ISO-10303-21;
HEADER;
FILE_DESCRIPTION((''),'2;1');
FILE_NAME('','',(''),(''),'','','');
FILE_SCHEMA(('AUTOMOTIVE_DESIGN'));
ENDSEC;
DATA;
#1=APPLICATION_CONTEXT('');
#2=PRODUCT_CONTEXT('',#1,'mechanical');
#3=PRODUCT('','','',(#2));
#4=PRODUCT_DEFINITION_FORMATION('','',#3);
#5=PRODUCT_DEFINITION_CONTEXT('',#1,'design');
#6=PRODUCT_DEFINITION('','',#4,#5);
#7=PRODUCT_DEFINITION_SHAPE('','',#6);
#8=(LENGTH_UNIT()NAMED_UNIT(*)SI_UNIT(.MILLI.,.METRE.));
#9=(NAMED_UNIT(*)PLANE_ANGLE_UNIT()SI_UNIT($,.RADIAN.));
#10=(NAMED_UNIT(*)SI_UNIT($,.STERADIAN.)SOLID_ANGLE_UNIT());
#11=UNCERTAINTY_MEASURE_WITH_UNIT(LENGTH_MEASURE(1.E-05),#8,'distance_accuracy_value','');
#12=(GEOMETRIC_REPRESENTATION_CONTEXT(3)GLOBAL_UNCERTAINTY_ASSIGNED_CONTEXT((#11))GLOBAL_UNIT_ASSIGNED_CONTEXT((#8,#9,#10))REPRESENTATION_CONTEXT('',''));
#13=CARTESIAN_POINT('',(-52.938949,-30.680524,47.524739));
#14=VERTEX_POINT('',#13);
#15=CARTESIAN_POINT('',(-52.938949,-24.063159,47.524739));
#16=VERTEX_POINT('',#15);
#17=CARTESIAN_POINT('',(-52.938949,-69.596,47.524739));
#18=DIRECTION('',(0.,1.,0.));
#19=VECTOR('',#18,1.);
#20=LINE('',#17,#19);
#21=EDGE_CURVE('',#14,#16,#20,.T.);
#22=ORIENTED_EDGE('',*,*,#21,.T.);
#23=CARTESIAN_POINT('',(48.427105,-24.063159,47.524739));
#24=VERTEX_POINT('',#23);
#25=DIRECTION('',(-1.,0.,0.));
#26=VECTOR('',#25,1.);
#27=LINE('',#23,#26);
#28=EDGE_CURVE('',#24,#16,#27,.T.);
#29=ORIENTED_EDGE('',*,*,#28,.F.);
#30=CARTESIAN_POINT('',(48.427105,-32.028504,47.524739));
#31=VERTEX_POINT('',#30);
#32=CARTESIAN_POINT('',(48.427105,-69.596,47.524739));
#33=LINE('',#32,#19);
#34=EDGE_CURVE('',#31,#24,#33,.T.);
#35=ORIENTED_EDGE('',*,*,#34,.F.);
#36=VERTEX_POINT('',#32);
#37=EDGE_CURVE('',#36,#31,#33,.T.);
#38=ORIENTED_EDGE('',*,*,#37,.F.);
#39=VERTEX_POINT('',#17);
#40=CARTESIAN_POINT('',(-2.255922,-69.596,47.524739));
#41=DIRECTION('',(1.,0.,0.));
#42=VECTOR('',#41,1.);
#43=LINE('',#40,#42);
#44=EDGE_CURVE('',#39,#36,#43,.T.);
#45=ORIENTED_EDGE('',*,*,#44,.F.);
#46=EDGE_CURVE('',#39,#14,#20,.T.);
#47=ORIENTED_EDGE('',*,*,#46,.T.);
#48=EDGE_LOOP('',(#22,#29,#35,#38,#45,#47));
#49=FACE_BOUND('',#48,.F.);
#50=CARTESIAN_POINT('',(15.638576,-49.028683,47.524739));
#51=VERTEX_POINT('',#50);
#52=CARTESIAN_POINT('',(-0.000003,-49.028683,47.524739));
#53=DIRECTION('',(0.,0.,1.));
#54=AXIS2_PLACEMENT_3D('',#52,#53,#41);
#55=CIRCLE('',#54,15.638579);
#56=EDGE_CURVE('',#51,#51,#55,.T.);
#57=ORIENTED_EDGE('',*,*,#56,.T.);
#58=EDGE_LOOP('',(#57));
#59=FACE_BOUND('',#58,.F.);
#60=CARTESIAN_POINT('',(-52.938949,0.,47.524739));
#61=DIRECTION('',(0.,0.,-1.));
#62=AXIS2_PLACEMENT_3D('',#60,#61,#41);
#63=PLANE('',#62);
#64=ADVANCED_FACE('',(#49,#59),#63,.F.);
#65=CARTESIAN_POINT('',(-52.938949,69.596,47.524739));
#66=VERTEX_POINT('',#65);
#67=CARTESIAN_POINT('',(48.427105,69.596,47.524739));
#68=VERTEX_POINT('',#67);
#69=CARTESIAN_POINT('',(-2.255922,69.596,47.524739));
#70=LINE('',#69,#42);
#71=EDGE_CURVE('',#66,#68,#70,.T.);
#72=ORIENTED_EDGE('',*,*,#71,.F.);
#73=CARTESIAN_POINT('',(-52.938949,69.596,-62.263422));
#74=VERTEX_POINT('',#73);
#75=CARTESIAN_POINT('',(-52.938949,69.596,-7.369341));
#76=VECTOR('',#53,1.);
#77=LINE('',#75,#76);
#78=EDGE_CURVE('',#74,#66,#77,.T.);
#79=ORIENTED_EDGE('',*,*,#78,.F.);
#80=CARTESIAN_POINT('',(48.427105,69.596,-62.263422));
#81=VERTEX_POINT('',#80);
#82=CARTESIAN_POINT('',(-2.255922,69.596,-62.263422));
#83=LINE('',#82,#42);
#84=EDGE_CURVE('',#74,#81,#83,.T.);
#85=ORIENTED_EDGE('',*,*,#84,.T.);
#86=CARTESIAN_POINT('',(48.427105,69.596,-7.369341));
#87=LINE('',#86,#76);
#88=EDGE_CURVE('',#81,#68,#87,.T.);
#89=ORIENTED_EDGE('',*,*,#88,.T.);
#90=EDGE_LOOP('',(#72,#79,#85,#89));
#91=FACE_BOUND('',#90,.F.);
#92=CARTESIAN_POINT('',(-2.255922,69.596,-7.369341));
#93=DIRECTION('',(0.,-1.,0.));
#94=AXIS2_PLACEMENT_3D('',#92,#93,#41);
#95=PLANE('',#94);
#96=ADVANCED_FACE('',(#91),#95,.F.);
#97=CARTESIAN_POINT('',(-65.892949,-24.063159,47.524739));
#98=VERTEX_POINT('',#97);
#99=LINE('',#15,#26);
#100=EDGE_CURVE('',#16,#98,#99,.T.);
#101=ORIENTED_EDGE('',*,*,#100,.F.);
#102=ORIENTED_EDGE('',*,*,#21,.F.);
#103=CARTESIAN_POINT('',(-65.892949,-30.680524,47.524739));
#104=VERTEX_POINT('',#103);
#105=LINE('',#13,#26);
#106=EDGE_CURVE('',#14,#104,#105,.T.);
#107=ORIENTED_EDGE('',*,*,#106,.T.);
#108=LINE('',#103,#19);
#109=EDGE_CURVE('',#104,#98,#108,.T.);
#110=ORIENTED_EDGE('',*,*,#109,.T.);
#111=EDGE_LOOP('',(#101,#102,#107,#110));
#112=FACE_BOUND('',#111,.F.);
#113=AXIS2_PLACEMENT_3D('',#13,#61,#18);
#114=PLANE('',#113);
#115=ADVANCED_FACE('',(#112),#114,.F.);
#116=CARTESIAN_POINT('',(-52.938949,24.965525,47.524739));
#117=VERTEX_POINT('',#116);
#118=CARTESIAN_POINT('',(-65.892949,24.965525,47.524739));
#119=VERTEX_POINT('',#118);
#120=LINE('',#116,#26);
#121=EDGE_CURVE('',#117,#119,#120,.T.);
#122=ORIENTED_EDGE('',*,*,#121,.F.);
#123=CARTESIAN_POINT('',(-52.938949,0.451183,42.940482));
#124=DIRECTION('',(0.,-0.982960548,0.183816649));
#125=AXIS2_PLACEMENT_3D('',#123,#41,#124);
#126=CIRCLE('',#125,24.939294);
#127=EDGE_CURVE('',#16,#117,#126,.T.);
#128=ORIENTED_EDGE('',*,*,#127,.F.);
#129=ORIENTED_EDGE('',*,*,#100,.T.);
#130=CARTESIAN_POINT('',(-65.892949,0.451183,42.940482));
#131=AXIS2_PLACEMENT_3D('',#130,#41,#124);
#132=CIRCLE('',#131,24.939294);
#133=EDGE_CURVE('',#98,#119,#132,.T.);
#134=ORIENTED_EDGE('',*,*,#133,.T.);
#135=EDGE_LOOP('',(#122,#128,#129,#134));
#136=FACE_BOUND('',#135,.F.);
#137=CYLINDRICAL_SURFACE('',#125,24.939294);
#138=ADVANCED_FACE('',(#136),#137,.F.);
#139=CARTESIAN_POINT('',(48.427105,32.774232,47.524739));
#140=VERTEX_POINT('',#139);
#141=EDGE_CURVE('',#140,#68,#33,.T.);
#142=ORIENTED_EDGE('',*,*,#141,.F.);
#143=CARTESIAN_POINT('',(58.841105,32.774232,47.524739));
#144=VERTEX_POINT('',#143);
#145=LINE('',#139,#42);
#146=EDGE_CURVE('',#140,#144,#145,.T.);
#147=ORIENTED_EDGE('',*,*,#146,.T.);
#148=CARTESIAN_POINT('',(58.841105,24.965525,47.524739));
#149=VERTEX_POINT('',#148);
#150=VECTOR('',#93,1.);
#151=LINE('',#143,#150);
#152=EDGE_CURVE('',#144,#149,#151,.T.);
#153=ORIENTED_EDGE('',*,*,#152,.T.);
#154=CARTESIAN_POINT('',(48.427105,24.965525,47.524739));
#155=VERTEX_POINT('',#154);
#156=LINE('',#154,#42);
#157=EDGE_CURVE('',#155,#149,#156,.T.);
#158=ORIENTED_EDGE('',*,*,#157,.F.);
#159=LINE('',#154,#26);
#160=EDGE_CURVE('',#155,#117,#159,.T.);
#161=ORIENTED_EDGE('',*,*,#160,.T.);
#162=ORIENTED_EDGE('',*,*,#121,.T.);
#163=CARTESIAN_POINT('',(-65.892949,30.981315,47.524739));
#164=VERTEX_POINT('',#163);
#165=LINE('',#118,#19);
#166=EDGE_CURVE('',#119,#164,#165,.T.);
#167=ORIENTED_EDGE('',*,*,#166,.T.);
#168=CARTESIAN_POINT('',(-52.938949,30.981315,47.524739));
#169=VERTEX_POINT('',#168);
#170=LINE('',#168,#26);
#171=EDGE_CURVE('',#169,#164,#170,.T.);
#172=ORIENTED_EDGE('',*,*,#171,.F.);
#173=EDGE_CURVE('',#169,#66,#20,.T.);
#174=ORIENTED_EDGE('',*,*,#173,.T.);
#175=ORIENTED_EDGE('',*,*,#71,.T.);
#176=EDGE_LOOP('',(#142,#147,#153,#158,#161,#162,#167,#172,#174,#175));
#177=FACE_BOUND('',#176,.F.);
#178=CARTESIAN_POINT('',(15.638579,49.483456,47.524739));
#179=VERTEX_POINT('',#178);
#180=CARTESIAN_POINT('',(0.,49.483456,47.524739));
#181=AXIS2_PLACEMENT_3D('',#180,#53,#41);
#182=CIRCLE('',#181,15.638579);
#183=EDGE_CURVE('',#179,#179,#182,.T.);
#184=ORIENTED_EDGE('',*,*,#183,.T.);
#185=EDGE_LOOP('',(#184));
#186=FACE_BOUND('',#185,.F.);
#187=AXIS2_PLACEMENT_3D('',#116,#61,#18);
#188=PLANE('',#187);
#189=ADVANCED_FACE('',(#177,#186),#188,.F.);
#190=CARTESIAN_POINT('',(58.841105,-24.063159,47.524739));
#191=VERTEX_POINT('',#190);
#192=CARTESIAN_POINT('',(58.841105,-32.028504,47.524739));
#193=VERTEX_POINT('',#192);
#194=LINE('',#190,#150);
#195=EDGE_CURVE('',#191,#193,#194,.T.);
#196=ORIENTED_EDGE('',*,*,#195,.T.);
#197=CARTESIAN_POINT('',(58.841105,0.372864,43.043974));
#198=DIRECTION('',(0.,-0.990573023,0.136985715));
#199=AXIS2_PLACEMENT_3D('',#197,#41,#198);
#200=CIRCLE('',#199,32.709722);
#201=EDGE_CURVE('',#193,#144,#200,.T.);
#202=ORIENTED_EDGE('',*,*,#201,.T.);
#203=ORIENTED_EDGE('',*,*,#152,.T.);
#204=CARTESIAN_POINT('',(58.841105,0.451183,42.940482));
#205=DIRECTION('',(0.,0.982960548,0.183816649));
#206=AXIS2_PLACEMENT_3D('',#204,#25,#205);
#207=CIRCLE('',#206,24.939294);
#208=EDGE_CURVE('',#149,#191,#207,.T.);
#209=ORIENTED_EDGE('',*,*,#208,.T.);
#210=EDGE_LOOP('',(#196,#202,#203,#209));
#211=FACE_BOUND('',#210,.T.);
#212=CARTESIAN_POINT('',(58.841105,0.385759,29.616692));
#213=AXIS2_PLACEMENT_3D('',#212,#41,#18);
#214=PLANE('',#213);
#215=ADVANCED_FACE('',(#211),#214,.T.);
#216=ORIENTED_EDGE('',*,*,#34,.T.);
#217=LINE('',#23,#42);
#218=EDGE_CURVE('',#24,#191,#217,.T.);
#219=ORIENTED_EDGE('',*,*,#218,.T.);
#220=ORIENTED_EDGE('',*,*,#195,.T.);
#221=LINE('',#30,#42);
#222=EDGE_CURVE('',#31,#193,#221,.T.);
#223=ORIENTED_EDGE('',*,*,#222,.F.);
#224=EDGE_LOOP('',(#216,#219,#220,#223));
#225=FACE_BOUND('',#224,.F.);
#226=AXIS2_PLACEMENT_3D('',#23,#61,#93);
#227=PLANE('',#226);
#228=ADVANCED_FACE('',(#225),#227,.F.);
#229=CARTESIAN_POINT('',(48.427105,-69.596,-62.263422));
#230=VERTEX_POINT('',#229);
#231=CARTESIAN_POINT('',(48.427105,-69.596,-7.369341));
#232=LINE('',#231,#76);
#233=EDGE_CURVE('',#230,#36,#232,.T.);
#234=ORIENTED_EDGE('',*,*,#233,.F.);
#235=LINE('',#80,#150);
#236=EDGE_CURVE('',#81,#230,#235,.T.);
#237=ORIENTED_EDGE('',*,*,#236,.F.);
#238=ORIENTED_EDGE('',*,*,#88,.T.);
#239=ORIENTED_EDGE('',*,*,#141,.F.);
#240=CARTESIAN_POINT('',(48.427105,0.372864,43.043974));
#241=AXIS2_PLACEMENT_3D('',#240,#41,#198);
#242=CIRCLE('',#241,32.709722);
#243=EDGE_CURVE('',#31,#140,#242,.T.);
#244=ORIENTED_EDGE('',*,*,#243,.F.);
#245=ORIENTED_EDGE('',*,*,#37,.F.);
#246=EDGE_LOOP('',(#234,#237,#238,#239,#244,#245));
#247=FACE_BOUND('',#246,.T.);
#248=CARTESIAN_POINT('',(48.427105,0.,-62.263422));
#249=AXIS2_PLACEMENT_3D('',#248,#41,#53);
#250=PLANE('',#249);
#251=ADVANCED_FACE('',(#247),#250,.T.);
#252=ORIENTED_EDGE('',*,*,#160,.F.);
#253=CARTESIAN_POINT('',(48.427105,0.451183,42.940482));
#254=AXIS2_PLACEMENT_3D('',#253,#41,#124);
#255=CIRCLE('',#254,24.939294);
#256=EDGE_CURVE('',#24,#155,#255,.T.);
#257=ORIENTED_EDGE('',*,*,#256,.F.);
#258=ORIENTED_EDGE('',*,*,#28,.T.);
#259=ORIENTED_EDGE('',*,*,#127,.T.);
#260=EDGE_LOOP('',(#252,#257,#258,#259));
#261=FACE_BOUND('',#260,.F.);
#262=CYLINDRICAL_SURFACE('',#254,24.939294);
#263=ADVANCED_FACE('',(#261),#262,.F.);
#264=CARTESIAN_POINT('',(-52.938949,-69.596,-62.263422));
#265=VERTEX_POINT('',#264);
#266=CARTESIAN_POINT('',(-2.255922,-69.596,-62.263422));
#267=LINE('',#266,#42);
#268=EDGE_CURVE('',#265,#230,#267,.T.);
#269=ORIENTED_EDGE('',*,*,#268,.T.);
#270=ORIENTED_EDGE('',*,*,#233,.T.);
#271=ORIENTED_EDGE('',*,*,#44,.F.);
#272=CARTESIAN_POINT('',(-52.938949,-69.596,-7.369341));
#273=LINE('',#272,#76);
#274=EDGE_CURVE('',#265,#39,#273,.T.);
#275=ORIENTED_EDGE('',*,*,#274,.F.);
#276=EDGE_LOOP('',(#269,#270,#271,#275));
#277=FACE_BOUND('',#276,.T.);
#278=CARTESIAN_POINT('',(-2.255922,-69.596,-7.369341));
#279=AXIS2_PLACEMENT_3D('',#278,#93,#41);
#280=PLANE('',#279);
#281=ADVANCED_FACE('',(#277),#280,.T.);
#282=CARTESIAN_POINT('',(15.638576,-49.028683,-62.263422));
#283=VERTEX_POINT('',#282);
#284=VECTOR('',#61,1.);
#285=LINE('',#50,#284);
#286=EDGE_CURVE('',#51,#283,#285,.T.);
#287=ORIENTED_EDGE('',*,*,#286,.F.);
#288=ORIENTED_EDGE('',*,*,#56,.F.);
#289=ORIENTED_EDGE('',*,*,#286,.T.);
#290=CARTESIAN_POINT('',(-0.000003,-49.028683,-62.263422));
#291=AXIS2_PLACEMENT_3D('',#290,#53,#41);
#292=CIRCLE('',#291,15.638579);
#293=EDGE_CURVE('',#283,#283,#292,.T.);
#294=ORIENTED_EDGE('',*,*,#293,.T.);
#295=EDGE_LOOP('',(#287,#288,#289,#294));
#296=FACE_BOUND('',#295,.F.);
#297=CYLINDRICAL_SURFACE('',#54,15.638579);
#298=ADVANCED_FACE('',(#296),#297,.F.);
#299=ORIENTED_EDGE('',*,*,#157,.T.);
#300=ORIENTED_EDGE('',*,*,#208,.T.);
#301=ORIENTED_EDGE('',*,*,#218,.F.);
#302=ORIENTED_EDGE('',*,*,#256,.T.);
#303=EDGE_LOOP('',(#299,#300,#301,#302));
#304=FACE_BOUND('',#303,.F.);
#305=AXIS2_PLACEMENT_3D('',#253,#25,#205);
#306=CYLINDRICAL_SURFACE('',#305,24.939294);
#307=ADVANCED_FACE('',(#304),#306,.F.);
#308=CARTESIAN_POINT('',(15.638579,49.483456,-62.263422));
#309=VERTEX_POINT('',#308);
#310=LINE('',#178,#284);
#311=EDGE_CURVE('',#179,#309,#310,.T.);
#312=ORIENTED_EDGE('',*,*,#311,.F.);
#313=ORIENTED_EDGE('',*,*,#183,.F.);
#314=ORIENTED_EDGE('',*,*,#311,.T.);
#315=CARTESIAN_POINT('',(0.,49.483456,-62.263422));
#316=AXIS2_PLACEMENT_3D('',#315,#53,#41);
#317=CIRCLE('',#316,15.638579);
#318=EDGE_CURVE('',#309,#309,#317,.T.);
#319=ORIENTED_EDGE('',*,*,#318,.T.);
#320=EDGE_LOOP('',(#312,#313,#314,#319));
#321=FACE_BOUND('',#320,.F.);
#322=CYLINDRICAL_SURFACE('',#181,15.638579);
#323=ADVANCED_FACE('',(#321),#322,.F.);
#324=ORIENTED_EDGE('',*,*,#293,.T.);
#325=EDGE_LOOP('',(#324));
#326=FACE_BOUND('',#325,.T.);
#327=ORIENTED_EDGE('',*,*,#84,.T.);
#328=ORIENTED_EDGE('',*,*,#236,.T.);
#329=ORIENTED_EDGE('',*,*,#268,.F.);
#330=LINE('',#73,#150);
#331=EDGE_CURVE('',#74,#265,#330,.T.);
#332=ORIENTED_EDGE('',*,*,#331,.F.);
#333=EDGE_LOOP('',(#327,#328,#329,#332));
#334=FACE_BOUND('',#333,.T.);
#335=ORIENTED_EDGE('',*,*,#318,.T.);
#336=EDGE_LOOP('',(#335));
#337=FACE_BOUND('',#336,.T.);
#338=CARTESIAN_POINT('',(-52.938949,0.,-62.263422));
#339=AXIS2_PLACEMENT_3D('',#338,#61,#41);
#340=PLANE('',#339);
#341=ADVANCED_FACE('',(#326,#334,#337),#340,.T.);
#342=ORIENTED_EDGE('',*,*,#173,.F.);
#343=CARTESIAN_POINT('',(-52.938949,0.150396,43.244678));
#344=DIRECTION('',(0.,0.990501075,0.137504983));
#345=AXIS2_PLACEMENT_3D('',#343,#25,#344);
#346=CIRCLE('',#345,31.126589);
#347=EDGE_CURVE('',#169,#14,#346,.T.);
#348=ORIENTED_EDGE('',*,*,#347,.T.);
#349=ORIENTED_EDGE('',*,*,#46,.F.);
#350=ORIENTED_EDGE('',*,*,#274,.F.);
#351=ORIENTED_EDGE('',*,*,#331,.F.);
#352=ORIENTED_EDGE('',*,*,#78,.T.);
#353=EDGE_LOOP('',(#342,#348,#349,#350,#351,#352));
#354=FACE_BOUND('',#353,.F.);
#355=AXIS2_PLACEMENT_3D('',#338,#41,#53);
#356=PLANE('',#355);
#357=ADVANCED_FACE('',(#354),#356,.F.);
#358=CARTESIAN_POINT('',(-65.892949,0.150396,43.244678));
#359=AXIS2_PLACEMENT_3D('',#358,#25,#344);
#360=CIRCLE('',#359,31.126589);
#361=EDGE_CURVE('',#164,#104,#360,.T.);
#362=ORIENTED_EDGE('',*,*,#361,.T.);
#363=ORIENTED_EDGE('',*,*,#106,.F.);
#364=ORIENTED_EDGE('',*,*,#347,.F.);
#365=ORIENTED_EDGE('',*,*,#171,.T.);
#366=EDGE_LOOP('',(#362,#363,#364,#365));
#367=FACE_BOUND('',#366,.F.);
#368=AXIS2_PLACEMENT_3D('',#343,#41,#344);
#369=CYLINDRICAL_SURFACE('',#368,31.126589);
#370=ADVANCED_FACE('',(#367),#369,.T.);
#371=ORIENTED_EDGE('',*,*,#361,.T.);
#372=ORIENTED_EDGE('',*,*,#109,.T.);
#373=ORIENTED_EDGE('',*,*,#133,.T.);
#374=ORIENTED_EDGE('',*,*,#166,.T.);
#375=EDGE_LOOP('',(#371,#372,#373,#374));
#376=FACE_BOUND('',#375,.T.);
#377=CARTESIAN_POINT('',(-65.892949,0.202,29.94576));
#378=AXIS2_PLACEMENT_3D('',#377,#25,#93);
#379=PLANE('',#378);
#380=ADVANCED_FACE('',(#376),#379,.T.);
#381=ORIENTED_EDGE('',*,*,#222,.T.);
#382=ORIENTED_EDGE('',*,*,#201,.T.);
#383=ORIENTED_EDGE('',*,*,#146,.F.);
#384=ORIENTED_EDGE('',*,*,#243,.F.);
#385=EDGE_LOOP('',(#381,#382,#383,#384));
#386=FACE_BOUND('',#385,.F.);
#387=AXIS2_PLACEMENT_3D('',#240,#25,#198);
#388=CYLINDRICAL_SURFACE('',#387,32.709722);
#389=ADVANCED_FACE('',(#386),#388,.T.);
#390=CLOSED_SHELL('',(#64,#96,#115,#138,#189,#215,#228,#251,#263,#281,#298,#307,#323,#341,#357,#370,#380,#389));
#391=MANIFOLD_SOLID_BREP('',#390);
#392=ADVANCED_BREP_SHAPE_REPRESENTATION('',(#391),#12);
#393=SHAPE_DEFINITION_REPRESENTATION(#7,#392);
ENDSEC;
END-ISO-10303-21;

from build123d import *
from build123d import SkipClean  # not in build123d's __all__

# Parameters (mm, degrees)
F0_W     = 101.3660542667
F0_H     = 109.7881607711
F1_DEPTH = 69.596
F3_DEPTH = 101.3670542667
F5_DEPTH = 10.414
F7_DEPTH = 12.954
F8_R     = 15.6385789161
F9_DEPTH = 109.7891607711


# Not quite as in the source:
# - after a boolean that leaves OpenCascade's solid faulty, fix() repairs it


with BuildPart() as f1:
    # F0 (on Front) → F1 (new body, symmetric)
    with BuildSketch(Plane.XZ):
        with Locations((-2.2559221834, -7.3693413287)):
            Rectangle(F0_W, F0_H)
    extrude(amount=F1_DEPTH, both=True)

    # F2 (on face) → F3 (cut, through all)
    with BuildSketch(Plane.YZ.offset(48.42710495)):
        with BuildLine():
            Line((24.9655246735, 47.5247390568), (-24.0631587803, 47.5247390568))
            ThreePointArc((-24.0631587803, 47.5247390568), (0.4511829466, 18.0011880568), (24.9655246735, 47.5247390568))
        make_face()
    extrude(amount=-F3_DEPTH, mode=Mode.SUBTRACT)

    # F4 (on face) → F5 (join)
    with BuildSketch(Plane.YZ.offset(48.42710495)):
        with BuildLine():
            Line((-24.0631587803, 47.5247390568), (-32.028503716, 47.5247390568))
            ThreePointArc((-32.028503716, 47.5247390568), (0.372864306, 10.3342526114), (32.7742323279, 47.5247390568))
            Line((32.7742323279, 47.5247390568), (24.9655246735, 47.5247390568))
            ThreePointArc((24.9655246735, 47.5247390568), (0.4511829466, 18.0011880568), (-24.0631587803, 47.5247390568))
        make_face()
    with SkipClean():  # cleaning this boolean's faces spoils the solid; the shape is the same uncleaned
        extrude(amount=F5_DEPTH)

    # F6 (on face) → F7 (join)
    with BuildSketch(Plane(origin=(-52.9389493167, 0, 0), x_dir=(0, -1, 0), z_dir=(-1, 0, 0))):
        with BuildLine():
            Line((-24.9655246735, 47.5247390568), (-30.9813152999, 47.5247390568))
            ThreePointArc((-30.9813152999, 47.5247390568), (-0.1503955573, 12.1180891172), (30.6805241853, 47.5247390568))
            Line((30.6805241853, 47.5247390568), (24.0631587803, 47.5247390568))
            ThreePointArc((24.0631587803, 47.5247390568), (-0.4511829466, 18.0011880568), (-24.9655246735, 47.5247390568))
        make_face()
    extrude(amount=F7_DEPTH)

    add(f1.part.fix(), mode=Mode.REPLACE)

    # F8 (on face) → F9 (cut, through all)
    with BuildSketch(Plane.XY.offset(47.5247390568)):
        with Locations((0, 49.4834557176)):
            Circle(F8_R)
        with Locations((-2.8148e-06, -49.0286834538)):
            Circle(F8_R)
    extrude(amount=-F9_DEPTH, mode=Mode.SUBTRACT)


solid = f1.part
